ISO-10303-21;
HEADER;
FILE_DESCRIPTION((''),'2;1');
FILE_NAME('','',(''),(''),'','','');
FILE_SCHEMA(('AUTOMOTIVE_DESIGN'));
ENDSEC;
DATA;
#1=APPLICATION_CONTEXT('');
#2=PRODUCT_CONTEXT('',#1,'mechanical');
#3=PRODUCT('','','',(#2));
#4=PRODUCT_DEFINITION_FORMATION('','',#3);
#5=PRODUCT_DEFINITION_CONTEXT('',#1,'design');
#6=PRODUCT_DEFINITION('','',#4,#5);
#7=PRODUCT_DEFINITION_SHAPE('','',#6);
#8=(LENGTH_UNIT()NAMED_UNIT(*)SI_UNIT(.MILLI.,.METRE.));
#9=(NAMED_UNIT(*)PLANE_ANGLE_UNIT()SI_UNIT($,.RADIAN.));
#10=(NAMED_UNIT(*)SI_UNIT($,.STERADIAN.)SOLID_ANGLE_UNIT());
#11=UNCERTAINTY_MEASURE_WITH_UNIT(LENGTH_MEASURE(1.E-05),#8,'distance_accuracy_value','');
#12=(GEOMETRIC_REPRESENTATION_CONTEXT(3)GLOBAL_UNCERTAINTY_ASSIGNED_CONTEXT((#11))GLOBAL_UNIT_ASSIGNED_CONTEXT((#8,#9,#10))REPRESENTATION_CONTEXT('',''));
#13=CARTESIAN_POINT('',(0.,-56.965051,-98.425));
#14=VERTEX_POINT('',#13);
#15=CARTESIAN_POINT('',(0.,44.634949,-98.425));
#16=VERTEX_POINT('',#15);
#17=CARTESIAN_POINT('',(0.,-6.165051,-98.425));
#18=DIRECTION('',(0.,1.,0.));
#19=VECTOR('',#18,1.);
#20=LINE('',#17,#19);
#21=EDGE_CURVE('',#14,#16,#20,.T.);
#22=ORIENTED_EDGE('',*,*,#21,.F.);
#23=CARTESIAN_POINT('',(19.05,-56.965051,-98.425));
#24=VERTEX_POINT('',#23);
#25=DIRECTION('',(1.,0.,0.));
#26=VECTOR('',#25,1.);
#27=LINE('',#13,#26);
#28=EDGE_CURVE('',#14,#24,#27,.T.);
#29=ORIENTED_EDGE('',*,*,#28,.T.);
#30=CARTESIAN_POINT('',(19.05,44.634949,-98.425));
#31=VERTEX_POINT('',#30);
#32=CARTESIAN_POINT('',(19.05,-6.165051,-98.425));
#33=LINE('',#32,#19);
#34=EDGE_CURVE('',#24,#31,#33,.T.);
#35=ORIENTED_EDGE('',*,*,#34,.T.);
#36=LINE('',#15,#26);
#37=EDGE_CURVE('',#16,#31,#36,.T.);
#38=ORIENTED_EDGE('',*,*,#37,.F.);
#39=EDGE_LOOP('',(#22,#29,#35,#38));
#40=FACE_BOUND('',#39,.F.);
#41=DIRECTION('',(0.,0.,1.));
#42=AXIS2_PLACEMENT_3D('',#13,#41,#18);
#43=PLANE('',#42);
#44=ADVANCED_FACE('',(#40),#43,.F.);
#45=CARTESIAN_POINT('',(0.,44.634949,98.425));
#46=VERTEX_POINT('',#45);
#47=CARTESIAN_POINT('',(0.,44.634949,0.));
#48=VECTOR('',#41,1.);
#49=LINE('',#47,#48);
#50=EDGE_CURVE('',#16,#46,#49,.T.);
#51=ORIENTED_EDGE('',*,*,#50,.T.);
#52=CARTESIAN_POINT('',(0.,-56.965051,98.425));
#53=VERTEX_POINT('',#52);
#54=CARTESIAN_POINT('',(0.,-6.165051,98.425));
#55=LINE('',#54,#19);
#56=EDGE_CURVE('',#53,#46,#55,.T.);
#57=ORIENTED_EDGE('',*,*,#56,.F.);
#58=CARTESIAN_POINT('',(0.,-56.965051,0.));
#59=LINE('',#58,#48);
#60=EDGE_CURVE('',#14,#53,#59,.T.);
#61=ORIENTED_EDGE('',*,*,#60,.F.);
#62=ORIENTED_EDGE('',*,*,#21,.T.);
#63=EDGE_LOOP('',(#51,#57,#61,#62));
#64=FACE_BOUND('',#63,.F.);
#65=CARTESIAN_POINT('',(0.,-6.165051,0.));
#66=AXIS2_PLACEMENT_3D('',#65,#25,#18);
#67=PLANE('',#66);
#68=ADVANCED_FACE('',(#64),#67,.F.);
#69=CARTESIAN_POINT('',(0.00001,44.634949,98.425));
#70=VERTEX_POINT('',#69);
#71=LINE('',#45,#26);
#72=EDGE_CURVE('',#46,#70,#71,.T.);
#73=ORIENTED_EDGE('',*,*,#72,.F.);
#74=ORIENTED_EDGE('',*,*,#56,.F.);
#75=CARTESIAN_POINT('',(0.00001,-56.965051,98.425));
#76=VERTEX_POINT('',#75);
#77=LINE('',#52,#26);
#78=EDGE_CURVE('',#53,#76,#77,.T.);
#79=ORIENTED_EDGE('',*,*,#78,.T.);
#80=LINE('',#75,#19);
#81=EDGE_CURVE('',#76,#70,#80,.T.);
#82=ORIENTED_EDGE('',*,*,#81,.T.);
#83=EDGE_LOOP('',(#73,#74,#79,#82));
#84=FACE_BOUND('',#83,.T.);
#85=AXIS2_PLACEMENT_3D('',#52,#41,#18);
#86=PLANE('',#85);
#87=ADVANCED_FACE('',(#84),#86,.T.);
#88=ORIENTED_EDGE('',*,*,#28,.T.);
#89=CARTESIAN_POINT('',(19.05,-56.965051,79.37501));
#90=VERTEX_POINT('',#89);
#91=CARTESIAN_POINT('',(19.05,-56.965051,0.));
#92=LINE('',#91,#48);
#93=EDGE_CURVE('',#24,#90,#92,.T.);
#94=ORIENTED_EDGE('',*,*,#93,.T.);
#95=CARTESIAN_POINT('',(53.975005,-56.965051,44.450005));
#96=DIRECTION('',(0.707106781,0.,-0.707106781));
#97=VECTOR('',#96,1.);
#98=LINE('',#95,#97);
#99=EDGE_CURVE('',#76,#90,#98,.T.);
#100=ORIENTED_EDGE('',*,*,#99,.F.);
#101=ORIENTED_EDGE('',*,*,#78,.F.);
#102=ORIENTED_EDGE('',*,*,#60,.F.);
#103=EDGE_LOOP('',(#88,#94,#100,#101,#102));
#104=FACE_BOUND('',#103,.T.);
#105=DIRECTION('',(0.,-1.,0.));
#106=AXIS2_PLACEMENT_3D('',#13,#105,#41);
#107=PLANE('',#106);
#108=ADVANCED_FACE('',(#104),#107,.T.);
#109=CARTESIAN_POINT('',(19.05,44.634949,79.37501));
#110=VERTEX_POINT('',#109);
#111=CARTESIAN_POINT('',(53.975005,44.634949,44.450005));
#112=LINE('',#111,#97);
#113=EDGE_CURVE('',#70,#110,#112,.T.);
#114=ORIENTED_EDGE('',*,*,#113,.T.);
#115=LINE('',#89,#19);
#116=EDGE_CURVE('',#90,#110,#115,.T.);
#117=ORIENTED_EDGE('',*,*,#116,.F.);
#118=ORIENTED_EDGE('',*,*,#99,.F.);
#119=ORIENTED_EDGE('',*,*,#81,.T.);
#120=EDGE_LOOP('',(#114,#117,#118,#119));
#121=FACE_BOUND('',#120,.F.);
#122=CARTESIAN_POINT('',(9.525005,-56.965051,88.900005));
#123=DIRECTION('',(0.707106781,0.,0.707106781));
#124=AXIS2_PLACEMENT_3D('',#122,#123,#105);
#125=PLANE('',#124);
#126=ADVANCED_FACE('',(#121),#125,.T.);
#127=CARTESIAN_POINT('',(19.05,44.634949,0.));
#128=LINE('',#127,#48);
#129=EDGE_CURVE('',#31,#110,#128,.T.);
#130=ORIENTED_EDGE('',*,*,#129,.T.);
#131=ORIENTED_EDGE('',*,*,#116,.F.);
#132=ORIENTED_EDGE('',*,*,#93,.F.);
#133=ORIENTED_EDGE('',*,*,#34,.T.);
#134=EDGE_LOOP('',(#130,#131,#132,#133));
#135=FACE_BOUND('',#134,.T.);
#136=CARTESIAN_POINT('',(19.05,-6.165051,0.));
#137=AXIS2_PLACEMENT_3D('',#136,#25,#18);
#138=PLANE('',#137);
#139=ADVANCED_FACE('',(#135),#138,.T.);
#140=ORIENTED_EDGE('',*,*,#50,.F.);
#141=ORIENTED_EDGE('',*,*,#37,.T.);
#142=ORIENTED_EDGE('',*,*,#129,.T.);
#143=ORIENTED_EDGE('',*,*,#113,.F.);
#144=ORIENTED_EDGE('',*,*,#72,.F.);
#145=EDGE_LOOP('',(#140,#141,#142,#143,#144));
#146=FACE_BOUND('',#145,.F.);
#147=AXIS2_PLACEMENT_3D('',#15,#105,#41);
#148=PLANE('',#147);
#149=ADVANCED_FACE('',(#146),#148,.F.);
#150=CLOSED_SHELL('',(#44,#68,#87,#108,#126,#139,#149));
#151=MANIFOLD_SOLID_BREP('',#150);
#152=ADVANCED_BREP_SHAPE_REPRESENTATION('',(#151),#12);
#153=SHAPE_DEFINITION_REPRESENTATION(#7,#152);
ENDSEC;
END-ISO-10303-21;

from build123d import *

# Parameters (mm, degrees)
F0_W     = 101.6
F0_H     = 196.85
F1_DEPTH = 19.05
F2_SIZE  = 19.04999


# Not quite as in the source:
# - a fillet or chamfer is up to 0.001 mm smaller than in the source, because OpenCascade refuses the exact size


with BuildPart() as f1:
    # F0 (on Right) → F1 (new body)
    with BuildSketch(Plane.YZ):
        with Locations((-6.1650511805, 0)):
            Rectangle(F0_W, F0_H)
    extrude(amount=F1_DEPTH)

    # F2 (size 19.05 in the source; OpenCascade refuses exactly that, so slightly less here)
    f2_edges = [f1.edges().sort_by_distance(p)[0] for p in [
        (19.05, -6.165051, 98.425),
    ]]
    chamfer(f2_edges, length=F2_SIZE)


solid = f1.part
